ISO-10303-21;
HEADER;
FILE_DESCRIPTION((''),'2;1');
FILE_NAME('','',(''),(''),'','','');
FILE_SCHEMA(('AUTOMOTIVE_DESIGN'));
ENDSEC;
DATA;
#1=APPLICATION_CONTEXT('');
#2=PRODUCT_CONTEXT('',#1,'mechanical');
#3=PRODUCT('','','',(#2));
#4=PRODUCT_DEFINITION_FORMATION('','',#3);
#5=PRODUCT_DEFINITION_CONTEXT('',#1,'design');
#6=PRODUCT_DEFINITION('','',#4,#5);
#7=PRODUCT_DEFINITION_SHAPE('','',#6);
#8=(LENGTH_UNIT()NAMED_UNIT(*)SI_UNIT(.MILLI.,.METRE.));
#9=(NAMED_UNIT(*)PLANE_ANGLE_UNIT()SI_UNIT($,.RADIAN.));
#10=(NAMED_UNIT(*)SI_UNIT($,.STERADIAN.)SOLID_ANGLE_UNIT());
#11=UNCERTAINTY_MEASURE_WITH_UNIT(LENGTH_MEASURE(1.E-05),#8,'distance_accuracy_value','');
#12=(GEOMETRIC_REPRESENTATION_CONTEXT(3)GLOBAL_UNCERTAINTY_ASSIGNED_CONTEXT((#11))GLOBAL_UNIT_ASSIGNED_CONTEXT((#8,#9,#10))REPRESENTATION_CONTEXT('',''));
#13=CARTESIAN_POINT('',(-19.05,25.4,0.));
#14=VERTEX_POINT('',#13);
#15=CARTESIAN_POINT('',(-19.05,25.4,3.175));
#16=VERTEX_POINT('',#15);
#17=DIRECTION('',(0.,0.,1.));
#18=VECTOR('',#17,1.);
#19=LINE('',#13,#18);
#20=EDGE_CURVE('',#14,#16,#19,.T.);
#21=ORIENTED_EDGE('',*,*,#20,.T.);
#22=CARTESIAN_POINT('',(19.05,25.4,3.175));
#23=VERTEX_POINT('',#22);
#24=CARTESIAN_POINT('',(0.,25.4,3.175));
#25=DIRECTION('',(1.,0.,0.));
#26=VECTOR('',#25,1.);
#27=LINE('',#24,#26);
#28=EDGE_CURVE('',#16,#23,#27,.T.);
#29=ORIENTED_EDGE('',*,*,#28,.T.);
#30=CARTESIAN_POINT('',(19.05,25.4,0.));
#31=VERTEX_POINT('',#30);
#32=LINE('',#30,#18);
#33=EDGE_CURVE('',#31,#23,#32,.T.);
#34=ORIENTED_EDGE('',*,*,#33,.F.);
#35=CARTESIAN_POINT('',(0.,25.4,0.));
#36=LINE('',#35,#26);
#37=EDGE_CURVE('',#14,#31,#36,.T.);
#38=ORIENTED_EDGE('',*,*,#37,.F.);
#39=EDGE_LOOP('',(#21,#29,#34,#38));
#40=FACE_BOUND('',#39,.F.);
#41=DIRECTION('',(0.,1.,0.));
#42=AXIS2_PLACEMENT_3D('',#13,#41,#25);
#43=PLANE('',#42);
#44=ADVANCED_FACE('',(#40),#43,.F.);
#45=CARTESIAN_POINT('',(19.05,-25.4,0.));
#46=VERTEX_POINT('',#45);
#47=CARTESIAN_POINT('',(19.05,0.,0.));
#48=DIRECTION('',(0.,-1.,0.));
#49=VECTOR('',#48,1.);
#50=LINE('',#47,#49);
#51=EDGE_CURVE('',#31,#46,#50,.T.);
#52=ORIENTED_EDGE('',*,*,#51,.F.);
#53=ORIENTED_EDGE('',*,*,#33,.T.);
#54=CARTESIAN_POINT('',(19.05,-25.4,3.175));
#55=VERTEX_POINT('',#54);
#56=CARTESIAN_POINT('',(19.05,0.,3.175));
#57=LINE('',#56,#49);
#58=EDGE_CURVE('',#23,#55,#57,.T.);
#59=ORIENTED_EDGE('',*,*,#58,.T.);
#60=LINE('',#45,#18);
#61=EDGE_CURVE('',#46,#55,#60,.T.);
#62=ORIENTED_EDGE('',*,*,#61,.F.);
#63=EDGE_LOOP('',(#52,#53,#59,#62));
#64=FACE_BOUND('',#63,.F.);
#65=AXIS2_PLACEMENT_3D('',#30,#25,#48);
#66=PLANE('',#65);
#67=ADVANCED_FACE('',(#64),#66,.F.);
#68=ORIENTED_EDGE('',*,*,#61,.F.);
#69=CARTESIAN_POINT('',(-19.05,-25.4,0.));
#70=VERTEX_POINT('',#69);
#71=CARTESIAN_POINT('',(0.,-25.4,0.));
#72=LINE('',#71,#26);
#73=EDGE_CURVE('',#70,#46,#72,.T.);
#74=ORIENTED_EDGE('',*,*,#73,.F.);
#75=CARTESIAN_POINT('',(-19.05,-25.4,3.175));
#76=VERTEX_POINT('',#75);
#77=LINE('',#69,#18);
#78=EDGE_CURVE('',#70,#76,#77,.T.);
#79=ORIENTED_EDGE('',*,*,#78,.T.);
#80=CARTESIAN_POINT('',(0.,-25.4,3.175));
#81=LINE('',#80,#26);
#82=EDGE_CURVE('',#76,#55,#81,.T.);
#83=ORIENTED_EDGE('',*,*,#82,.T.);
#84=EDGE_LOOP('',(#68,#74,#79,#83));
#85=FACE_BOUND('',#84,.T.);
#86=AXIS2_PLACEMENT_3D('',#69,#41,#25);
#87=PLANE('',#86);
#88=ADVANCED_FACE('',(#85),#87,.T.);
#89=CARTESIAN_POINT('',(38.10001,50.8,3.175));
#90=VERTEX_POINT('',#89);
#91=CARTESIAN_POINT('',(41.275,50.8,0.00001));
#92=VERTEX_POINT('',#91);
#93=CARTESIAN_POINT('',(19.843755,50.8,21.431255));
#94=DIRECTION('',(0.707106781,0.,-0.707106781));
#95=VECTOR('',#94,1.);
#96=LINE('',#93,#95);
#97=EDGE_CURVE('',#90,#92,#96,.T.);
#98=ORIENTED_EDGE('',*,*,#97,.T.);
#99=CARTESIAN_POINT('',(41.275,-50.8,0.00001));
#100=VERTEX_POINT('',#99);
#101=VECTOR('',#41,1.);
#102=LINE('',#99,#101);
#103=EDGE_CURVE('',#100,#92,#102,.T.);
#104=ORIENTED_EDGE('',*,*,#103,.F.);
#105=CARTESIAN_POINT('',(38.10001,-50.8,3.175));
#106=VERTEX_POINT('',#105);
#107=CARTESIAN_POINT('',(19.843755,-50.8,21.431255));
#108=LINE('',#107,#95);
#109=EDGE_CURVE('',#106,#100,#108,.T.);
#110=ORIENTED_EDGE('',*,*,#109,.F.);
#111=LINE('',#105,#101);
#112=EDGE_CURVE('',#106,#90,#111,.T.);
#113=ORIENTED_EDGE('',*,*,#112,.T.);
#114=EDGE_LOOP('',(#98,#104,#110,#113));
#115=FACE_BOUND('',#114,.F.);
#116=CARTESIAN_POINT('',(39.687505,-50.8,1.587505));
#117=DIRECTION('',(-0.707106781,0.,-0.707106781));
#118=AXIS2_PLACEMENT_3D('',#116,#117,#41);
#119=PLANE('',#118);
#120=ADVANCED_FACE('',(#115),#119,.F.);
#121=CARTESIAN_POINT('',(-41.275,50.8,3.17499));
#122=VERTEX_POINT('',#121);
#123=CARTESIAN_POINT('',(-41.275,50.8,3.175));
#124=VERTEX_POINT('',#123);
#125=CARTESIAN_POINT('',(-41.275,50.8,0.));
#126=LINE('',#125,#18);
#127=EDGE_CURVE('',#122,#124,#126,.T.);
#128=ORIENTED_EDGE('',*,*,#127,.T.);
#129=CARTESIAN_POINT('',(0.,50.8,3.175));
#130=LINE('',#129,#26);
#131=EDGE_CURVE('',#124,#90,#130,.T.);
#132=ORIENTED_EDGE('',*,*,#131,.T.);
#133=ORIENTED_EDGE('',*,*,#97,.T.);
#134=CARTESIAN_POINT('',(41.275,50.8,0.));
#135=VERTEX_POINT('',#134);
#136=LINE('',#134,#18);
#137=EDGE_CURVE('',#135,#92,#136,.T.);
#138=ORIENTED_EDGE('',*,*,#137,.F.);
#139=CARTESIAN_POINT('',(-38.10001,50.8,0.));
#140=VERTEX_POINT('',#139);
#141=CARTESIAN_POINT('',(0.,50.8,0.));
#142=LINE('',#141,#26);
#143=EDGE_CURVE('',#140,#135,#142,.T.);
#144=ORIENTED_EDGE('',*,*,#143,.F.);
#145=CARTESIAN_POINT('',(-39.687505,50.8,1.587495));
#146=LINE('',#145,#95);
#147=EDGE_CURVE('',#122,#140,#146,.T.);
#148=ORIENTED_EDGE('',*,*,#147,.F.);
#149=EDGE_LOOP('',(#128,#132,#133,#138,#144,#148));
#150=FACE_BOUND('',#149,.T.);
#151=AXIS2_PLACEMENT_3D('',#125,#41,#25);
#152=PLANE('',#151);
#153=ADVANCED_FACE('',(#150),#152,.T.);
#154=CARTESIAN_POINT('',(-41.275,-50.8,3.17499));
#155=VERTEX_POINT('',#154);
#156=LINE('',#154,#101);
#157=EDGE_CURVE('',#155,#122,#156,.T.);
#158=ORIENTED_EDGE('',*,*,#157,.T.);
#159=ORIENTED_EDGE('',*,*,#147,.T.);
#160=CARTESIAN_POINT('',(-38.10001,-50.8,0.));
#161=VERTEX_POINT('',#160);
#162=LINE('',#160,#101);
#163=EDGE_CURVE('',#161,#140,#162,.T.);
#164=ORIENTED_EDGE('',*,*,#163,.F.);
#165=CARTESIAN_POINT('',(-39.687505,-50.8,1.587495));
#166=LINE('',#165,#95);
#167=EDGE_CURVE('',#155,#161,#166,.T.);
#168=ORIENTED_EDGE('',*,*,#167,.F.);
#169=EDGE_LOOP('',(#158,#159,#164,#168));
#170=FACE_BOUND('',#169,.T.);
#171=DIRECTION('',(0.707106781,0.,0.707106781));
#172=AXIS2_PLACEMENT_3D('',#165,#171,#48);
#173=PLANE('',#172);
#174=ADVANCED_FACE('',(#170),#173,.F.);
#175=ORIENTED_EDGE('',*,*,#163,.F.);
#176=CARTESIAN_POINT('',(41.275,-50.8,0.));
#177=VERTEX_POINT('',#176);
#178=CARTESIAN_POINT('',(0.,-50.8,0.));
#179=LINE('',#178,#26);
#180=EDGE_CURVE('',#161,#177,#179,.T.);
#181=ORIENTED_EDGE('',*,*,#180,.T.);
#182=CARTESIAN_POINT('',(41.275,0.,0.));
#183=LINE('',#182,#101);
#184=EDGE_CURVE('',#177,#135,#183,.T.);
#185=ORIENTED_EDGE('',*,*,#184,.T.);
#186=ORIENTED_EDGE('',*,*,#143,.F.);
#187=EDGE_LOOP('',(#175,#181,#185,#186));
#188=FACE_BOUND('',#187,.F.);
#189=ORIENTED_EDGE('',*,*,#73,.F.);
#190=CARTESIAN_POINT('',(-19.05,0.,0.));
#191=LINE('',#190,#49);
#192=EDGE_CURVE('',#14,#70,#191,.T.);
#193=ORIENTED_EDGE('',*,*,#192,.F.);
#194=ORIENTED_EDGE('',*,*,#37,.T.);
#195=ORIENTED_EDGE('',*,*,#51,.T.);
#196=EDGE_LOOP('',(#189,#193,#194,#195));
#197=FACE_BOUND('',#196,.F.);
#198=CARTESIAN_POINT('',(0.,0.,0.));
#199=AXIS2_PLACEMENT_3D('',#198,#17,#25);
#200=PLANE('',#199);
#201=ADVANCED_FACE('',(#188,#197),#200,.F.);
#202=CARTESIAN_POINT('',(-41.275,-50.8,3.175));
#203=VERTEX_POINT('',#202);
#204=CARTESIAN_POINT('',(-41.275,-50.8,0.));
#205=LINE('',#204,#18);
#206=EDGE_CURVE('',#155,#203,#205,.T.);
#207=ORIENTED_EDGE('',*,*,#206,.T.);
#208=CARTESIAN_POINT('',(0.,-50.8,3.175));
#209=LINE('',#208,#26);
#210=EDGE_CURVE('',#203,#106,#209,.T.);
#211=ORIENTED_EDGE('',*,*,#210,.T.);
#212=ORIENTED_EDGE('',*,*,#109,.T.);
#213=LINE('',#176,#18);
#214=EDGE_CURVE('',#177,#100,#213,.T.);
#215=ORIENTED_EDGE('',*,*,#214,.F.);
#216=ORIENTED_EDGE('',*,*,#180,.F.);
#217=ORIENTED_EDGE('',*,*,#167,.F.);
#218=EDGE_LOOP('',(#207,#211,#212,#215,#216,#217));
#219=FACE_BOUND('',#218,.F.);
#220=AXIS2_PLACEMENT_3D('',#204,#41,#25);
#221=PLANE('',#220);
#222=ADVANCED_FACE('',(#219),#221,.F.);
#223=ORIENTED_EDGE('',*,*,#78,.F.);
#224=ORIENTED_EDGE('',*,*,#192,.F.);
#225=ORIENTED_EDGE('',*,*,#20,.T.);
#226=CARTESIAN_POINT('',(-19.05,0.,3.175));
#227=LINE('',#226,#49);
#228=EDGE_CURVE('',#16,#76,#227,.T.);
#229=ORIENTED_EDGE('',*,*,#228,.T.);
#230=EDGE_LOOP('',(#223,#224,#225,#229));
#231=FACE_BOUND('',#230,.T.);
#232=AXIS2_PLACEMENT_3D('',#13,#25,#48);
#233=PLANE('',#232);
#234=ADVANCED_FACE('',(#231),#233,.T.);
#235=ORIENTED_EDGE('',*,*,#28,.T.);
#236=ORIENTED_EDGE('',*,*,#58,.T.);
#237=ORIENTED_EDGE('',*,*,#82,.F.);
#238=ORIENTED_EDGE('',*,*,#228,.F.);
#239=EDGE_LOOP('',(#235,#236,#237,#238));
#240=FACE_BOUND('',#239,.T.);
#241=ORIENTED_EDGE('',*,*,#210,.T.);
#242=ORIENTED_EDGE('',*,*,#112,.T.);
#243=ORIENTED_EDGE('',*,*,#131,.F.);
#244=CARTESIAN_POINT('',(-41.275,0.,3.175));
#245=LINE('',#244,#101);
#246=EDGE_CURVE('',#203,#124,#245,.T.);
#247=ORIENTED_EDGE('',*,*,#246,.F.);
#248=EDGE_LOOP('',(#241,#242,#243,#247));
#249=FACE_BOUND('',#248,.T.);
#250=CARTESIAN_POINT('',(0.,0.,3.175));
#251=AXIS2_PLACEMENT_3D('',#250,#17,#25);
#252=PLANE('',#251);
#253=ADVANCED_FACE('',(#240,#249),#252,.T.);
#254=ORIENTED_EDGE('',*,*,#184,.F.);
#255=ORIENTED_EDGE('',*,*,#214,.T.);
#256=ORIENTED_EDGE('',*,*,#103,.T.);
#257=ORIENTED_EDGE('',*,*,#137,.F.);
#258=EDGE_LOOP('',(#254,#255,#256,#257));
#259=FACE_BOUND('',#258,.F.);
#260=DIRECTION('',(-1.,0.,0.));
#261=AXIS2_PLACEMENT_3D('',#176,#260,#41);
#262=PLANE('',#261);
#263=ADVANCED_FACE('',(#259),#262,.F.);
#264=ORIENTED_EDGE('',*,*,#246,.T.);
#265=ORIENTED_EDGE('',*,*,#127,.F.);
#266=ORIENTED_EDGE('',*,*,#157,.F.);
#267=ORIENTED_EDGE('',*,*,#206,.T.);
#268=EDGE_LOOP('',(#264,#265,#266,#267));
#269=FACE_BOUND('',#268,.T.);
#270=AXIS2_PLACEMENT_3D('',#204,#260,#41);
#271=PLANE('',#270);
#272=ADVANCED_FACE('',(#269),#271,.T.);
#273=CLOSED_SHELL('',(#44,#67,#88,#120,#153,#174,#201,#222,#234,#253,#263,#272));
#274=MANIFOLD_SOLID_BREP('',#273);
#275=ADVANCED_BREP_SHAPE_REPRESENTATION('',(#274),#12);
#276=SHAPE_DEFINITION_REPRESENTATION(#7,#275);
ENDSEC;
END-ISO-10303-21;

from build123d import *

# Parameters (mm, degrees)
F0_W     = 82.55
F0_H     = 101.6
F1_DEPTH = 3.175
F2_SIZE  = 3.17499
F3_W     = 38.1
F3_H     = 50.8
F4_DEPTH = 3.175
F5_SIZE  = 3.17499


# Not quite as in the source:
# - a fillet or chamfer is up to 0.001 mm smaller than in the source, because OpenCascade refuses the exact size


with BuildPart() as f1:
    # F0 (on Top) → F1 (new body)
    with BuildSketch(Plane.XY):
        Rectangle(F0_W, F0_H)
    extrude(amount=F1_DEPTH)

    # F2 (size 3.175 in the source; OpenCascade refuses exactly that, so slightly less here)
    f2_edges = [f1.edges().sort_by_distance(p)[0] for p in [
        (-41.275, 0, 0),
    ]]
    chamfer(f2_edges, length=F2_SIZE)

    # F3 (on face) → F4 (cut)
    with BuildSketch(Plane(origin=(0, 0, 0), x_dir=(1, 0, 0), z_dir=(0, 0, -1))):
        Rectangle(F3_W, F3_H)
    extrude(amount=-F4_DEPTH, mode=Mode.SUBTRACT)

    # F5 (size 3.175 in the source; OpenCascade refuses exactly that, so slightly less here)
    f5_edges = [f1.edges().sort_by_distance(p)[0] for p in [
        (41.275, 0, 3.175),
    ]]
    chamfer(f5_edges, length=F5_SIZE)


solid = f1.part
